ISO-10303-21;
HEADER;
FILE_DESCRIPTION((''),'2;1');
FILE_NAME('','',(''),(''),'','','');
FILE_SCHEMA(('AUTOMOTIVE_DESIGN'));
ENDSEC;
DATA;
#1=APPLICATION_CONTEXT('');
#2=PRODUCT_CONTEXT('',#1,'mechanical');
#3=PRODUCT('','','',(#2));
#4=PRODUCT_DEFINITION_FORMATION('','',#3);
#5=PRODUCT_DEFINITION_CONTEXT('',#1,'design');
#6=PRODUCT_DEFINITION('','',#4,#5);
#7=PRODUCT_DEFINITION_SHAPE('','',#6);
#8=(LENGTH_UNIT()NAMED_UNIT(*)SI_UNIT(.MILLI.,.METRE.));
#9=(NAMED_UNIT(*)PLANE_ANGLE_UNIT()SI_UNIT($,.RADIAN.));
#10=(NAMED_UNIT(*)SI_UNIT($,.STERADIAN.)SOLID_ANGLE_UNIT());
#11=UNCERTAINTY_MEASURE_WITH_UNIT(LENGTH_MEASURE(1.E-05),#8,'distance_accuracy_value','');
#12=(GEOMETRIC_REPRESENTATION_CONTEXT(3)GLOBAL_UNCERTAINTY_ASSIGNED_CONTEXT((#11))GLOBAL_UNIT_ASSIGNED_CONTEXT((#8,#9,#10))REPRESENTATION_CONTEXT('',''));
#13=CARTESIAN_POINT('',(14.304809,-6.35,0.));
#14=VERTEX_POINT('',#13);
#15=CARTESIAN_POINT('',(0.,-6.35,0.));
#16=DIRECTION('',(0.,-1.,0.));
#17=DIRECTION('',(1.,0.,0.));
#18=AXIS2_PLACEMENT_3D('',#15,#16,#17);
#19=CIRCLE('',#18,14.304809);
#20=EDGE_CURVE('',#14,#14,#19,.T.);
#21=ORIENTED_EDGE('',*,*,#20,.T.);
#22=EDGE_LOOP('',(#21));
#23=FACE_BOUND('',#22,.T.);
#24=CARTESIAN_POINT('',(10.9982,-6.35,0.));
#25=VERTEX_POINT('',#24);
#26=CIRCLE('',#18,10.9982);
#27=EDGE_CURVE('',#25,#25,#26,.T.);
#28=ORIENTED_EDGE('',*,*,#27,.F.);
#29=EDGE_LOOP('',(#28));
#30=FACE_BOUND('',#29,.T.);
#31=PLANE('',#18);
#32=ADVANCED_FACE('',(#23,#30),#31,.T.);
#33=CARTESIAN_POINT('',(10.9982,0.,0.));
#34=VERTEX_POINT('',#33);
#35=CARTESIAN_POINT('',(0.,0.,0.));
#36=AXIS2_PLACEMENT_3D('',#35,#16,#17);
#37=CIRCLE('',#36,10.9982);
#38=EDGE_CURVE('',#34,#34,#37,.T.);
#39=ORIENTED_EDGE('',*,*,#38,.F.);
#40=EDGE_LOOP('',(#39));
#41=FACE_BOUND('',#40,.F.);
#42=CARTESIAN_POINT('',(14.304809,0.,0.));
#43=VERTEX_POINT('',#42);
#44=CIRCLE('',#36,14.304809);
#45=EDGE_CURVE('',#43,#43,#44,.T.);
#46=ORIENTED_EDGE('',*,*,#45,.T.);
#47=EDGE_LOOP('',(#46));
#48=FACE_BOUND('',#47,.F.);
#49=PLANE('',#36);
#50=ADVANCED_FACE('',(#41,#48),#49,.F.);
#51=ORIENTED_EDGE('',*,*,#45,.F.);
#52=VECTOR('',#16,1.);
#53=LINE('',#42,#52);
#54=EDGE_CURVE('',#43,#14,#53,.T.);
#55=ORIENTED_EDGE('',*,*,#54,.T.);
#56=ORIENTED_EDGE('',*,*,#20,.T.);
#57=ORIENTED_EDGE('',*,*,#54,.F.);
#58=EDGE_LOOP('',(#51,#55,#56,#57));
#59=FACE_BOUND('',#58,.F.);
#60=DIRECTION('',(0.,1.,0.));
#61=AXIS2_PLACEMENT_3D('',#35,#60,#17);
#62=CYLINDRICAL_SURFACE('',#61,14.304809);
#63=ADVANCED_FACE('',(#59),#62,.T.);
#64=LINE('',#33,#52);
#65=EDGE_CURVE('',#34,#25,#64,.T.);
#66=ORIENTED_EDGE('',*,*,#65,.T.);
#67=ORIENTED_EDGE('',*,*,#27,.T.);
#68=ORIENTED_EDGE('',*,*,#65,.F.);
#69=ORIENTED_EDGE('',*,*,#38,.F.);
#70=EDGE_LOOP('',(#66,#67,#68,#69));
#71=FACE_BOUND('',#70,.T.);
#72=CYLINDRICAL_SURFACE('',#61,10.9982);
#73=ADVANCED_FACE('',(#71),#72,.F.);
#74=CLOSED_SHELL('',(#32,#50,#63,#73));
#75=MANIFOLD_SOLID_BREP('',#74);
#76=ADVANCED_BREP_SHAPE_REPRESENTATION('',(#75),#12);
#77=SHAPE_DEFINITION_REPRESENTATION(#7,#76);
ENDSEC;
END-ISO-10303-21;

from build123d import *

# Parameters (mm, degrees)
F0_R     = 14.3048091379
F0_R_2   = 10.9982
F3_DEPTH = 6.35


# Not quite as in the source:
# - a feature of the source that left no trace in its solid (it failed there, or was rolled back) is left out


with BuildPart() as f3:
    # F0 (on Front) → F3 (new body)
    with BuildSketch(Plane.XZ):
        Circle(F0_R)
        Circle(F0_R_2, mode=Mode.SUBTRACT)
    extrude(amount=F3_DEPTH)


solid = f3.part
